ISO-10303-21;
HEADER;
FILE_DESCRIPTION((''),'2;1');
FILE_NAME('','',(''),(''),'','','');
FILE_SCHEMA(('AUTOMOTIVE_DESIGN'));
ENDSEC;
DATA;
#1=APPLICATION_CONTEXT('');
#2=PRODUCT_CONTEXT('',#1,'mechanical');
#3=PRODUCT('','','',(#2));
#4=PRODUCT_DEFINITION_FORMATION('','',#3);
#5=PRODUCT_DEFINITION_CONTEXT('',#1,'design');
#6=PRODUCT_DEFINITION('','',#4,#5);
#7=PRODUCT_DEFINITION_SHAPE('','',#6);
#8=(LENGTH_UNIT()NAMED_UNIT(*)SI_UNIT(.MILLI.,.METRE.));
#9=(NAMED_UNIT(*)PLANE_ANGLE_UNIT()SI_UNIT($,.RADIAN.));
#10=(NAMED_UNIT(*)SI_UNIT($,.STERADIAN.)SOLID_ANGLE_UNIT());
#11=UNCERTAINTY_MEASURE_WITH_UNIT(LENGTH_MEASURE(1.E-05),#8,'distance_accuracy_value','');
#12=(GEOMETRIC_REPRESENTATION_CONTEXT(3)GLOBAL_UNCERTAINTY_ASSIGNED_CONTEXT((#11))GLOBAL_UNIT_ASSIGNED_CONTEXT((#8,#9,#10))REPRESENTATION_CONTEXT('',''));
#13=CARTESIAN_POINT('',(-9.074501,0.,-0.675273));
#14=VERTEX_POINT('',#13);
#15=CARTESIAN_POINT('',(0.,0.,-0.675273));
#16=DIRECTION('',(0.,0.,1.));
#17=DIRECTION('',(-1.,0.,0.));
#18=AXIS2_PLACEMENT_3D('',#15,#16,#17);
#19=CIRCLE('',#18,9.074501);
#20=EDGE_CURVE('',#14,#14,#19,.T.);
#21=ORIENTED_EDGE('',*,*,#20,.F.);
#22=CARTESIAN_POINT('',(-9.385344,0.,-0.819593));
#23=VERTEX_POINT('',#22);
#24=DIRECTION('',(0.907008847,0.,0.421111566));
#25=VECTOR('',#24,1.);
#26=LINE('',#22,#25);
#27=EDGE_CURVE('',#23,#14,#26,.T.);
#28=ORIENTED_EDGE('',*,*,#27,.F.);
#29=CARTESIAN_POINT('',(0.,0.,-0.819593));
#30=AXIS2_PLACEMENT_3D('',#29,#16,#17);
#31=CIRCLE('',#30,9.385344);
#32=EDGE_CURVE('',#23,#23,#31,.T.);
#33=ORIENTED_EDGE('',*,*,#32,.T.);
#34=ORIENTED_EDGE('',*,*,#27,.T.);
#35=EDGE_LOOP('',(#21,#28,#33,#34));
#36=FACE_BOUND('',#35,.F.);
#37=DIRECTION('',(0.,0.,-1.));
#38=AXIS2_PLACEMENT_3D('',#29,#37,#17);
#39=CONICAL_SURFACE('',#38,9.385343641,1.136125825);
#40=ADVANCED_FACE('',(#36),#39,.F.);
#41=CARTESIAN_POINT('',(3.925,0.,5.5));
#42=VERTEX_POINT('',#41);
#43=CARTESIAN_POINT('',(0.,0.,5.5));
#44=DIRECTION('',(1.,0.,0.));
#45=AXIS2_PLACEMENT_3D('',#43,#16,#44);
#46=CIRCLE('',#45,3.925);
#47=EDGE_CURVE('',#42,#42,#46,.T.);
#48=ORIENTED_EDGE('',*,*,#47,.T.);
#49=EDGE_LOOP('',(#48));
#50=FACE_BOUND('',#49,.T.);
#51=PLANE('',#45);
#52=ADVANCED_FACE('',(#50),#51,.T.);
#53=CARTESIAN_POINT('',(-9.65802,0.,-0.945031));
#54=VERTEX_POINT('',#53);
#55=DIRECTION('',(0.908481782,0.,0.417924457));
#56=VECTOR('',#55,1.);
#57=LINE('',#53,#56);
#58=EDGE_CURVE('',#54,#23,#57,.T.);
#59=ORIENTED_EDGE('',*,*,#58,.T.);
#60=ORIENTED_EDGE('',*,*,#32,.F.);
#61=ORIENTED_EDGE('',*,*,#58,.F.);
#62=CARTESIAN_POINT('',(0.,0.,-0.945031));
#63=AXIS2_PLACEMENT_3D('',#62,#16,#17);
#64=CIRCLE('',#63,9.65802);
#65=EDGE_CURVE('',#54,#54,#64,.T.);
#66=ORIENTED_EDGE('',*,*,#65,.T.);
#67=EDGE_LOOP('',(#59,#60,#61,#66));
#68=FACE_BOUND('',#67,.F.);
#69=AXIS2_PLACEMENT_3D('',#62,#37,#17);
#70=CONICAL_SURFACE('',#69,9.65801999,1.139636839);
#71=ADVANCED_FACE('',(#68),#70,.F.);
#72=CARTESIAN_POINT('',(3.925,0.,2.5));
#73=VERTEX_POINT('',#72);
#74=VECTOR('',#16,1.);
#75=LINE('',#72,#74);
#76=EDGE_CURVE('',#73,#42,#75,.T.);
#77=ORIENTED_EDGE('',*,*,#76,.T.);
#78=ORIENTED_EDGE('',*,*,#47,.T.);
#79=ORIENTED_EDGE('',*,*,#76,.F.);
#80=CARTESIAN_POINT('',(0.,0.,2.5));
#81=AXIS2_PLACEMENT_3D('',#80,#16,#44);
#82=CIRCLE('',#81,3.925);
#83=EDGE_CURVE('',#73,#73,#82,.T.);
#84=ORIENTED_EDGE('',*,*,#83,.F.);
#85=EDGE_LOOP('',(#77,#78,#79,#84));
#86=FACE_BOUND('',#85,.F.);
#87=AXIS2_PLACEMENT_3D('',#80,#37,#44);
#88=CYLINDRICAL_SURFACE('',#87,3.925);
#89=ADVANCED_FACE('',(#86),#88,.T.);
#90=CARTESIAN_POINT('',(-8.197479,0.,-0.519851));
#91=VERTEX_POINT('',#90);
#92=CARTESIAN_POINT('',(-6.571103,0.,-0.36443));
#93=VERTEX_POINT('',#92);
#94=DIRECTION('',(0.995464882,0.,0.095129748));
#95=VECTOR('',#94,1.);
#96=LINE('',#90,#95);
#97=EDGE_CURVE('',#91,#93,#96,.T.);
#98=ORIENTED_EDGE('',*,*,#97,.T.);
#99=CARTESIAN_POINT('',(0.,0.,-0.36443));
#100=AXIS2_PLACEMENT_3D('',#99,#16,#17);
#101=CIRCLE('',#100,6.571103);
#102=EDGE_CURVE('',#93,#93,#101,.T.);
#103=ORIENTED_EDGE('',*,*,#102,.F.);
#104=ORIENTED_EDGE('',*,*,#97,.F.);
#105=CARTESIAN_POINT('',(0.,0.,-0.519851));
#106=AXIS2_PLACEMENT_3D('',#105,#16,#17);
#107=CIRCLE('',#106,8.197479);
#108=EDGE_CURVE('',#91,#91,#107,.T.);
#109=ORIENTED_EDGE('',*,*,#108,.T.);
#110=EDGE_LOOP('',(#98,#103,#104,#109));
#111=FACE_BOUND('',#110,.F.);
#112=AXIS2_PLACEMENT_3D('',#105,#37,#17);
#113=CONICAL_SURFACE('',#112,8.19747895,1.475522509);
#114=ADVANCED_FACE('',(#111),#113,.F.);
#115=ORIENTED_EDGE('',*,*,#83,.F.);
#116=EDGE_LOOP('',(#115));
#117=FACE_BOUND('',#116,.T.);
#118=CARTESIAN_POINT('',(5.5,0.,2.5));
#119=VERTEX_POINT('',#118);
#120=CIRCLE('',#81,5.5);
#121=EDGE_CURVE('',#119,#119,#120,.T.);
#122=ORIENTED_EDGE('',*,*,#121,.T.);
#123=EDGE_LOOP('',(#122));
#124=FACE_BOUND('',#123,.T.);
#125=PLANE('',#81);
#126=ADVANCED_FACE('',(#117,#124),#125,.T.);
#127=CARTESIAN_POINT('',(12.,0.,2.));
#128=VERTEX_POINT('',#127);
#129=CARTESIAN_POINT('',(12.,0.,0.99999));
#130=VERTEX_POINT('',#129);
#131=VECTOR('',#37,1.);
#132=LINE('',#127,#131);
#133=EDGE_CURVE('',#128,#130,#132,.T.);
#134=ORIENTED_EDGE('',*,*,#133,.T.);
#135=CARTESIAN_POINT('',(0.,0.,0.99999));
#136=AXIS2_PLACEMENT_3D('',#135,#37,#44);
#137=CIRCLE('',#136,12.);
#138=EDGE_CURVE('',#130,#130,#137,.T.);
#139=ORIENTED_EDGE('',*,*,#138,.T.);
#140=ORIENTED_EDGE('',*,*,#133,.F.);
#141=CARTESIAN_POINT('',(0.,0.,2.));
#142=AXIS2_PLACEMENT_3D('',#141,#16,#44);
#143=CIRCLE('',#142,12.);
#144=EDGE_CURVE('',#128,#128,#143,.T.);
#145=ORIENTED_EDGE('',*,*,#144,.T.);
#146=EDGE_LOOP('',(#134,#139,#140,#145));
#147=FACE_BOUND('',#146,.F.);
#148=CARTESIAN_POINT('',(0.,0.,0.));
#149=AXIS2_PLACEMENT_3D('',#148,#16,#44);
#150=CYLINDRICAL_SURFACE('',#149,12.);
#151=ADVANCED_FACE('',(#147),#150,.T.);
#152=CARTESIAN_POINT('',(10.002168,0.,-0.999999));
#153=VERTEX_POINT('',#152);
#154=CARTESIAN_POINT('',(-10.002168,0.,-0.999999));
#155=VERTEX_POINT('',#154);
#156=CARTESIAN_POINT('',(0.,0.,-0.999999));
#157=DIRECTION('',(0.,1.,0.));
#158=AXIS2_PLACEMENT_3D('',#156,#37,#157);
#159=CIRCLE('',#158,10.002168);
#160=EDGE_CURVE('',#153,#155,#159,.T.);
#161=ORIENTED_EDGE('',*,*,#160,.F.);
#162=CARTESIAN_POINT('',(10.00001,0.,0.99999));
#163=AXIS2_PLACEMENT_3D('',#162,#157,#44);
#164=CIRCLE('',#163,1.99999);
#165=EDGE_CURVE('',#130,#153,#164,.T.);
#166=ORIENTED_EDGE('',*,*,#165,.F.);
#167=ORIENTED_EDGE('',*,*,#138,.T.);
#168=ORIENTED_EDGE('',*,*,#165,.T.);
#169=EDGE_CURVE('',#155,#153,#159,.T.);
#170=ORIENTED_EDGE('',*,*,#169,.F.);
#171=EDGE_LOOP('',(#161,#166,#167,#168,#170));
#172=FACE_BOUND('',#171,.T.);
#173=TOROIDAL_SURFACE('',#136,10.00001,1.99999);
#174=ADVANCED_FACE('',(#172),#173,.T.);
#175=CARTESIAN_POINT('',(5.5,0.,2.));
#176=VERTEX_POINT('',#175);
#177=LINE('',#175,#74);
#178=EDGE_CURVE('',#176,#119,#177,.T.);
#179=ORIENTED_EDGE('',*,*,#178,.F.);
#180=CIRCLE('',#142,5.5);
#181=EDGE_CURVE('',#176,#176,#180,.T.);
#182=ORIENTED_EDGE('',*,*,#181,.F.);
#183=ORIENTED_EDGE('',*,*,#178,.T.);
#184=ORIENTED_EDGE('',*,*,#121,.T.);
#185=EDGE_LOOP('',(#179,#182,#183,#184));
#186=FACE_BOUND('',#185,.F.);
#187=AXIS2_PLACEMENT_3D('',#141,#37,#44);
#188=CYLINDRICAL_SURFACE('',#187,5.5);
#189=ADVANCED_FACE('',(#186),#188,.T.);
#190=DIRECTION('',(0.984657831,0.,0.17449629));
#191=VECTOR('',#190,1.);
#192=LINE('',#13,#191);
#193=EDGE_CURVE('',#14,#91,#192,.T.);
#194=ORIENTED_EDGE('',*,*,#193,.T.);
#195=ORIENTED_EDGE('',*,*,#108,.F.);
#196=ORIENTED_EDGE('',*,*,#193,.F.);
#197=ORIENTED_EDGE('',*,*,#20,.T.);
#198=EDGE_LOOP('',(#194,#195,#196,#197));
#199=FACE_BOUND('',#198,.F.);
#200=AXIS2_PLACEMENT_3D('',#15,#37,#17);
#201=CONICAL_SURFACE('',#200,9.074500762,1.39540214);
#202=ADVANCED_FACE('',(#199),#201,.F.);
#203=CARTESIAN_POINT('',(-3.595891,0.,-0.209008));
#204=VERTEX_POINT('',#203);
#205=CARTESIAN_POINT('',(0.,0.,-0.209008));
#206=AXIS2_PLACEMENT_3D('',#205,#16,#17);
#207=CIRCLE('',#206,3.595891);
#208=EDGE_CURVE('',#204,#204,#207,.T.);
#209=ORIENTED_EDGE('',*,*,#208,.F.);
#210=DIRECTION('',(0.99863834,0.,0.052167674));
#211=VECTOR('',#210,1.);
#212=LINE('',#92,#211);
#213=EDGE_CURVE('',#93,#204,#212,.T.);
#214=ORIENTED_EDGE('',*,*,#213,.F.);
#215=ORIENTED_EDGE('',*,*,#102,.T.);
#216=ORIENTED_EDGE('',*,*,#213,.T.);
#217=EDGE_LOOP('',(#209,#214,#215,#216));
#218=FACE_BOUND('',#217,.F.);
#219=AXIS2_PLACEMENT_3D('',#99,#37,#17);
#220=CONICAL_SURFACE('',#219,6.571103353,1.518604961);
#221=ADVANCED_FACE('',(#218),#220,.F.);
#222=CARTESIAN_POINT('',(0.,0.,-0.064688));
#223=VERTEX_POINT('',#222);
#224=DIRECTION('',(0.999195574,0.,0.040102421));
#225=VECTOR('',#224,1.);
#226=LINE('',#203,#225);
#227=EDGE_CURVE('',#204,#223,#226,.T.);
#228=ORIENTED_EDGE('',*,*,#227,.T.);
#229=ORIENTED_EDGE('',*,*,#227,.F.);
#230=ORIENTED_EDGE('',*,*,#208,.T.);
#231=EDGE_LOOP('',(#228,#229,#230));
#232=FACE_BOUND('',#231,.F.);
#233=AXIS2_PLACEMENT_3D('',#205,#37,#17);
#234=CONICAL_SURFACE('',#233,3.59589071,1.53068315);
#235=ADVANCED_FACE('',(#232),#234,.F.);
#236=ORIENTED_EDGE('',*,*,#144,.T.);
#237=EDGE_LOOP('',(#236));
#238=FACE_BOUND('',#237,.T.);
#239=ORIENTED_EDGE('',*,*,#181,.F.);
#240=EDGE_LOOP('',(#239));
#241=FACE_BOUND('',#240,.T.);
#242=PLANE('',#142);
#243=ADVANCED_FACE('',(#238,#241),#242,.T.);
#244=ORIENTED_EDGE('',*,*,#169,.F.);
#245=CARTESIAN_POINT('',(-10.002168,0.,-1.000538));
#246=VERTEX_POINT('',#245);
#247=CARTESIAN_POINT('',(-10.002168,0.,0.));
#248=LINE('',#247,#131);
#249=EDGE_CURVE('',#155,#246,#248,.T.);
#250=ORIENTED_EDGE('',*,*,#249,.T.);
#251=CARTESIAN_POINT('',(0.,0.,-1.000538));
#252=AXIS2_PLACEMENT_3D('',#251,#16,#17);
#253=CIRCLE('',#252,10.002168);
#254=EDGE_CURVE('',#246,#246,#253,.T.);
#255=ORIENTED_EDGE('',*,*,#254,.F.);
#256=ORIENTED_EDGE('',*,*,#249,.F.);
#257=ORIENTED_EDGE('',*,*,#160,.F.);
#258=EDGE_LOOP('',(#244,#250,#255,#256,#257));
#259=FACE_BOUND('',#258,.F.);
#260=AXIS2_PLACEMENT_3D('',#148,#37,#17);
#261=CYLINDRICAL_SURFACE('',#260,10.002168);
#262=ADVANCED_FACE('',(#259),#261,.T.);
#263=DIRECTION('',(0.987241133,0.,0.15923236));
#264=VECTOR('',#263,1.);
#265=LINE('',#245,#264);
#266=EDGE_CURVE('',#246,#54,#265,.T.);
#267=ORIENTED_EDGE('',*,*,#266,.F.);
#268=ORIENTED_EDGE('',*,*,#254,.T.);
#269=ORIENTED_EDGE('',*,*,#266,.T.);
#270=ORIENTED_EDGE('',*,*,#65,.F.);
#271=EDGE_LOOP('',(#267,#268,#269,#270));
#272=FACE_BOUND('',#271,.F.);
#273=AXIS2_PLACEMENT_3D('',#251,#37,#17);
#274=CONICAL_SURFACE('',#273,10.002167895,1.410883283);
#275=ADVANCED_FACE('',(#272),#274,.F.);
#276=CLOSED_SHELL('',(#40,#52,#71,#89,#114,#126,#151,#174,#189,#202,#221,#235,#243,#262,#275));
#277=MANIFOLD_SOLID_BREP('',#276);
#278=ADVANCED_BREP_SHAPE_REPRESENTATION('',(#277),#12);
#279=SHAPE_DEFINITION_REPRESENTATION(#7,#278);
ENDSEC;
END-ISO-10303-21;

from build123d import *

# Parameters (mm, degrees)
F0_R     = 12
F1_DEPTH = 2
F2_R     = 12
F2_R_2   = 10
F3_DEPTH = 1
F4_R     = 1.99999
F5_R     = 5.5
F6_DEPTH = 0.5
F7_R     = 3.925
F8_DEPTH = 3


# Not quite as in the source:
# - a fillet or chamfer is up to 0.001 mm smaller than in the source, because OpenCascade refuses the exact size


with BuildPart() as f1:
    # F0 (on Top) → F1 (new body)
    with BuildSketch(Plane.XY):
        Circle(F0_R)
    extrude(amount=F1_DEPTH)

    # F2 (on face) → F3 (join)
    with BuildSketch(Plane(origin=(0, 0, 0), x_dir=(1, 0, 0), z_dir=(0, 0, -1))):
        Circle(F2_R)
        Circle(F2_R_2, mode=Mode.SUBTRACT)
    extrude(amount=F3_DEPTH)

    # F4 (radius 2 in the source; OpenCascade refuses exactly that, so slightly less here)
    f4_edges = [f1.edges().sort_by_distance(p)[0] for p in [
        (-12, 0, -1),
    ]]
    fillet(f4_edges, radius=F4_R)

    # F5 (on face) → F6 (join)
    with BuildSketch(Plane.XY.offset(2)):
        Circle(F5_R)
    extrude(amount=F6_DEPTH)

    # F7 (on face) → F8 (join)
    with BuildSketch(Plane.XY.offset(2.5)):
        Circle(F7_R)
    extrude(amount=F8_DEPTH)

    # F9 (on Front) → F10 (revolve)
    with BuildSketch(Plane.XZ):
        Polygon((-10.0021678954, 0), (-10.0021678954, -1.0005384684), (-9.6580199897, -0.9450307698), (-9.385343641, -0.8195927949), (-9.0745007619, -0.6752727786), (-8.19747895, -0.5198512226), (-6.5711033531, -0.3644296667), (-3.5958907101, -0.2090081107), (0, -0.0646880944), (0, 0), align=None)
    revolve(axis=Axis((0, 0, -0.0323440472), (0, 0, 1)))


solid = f1.part
